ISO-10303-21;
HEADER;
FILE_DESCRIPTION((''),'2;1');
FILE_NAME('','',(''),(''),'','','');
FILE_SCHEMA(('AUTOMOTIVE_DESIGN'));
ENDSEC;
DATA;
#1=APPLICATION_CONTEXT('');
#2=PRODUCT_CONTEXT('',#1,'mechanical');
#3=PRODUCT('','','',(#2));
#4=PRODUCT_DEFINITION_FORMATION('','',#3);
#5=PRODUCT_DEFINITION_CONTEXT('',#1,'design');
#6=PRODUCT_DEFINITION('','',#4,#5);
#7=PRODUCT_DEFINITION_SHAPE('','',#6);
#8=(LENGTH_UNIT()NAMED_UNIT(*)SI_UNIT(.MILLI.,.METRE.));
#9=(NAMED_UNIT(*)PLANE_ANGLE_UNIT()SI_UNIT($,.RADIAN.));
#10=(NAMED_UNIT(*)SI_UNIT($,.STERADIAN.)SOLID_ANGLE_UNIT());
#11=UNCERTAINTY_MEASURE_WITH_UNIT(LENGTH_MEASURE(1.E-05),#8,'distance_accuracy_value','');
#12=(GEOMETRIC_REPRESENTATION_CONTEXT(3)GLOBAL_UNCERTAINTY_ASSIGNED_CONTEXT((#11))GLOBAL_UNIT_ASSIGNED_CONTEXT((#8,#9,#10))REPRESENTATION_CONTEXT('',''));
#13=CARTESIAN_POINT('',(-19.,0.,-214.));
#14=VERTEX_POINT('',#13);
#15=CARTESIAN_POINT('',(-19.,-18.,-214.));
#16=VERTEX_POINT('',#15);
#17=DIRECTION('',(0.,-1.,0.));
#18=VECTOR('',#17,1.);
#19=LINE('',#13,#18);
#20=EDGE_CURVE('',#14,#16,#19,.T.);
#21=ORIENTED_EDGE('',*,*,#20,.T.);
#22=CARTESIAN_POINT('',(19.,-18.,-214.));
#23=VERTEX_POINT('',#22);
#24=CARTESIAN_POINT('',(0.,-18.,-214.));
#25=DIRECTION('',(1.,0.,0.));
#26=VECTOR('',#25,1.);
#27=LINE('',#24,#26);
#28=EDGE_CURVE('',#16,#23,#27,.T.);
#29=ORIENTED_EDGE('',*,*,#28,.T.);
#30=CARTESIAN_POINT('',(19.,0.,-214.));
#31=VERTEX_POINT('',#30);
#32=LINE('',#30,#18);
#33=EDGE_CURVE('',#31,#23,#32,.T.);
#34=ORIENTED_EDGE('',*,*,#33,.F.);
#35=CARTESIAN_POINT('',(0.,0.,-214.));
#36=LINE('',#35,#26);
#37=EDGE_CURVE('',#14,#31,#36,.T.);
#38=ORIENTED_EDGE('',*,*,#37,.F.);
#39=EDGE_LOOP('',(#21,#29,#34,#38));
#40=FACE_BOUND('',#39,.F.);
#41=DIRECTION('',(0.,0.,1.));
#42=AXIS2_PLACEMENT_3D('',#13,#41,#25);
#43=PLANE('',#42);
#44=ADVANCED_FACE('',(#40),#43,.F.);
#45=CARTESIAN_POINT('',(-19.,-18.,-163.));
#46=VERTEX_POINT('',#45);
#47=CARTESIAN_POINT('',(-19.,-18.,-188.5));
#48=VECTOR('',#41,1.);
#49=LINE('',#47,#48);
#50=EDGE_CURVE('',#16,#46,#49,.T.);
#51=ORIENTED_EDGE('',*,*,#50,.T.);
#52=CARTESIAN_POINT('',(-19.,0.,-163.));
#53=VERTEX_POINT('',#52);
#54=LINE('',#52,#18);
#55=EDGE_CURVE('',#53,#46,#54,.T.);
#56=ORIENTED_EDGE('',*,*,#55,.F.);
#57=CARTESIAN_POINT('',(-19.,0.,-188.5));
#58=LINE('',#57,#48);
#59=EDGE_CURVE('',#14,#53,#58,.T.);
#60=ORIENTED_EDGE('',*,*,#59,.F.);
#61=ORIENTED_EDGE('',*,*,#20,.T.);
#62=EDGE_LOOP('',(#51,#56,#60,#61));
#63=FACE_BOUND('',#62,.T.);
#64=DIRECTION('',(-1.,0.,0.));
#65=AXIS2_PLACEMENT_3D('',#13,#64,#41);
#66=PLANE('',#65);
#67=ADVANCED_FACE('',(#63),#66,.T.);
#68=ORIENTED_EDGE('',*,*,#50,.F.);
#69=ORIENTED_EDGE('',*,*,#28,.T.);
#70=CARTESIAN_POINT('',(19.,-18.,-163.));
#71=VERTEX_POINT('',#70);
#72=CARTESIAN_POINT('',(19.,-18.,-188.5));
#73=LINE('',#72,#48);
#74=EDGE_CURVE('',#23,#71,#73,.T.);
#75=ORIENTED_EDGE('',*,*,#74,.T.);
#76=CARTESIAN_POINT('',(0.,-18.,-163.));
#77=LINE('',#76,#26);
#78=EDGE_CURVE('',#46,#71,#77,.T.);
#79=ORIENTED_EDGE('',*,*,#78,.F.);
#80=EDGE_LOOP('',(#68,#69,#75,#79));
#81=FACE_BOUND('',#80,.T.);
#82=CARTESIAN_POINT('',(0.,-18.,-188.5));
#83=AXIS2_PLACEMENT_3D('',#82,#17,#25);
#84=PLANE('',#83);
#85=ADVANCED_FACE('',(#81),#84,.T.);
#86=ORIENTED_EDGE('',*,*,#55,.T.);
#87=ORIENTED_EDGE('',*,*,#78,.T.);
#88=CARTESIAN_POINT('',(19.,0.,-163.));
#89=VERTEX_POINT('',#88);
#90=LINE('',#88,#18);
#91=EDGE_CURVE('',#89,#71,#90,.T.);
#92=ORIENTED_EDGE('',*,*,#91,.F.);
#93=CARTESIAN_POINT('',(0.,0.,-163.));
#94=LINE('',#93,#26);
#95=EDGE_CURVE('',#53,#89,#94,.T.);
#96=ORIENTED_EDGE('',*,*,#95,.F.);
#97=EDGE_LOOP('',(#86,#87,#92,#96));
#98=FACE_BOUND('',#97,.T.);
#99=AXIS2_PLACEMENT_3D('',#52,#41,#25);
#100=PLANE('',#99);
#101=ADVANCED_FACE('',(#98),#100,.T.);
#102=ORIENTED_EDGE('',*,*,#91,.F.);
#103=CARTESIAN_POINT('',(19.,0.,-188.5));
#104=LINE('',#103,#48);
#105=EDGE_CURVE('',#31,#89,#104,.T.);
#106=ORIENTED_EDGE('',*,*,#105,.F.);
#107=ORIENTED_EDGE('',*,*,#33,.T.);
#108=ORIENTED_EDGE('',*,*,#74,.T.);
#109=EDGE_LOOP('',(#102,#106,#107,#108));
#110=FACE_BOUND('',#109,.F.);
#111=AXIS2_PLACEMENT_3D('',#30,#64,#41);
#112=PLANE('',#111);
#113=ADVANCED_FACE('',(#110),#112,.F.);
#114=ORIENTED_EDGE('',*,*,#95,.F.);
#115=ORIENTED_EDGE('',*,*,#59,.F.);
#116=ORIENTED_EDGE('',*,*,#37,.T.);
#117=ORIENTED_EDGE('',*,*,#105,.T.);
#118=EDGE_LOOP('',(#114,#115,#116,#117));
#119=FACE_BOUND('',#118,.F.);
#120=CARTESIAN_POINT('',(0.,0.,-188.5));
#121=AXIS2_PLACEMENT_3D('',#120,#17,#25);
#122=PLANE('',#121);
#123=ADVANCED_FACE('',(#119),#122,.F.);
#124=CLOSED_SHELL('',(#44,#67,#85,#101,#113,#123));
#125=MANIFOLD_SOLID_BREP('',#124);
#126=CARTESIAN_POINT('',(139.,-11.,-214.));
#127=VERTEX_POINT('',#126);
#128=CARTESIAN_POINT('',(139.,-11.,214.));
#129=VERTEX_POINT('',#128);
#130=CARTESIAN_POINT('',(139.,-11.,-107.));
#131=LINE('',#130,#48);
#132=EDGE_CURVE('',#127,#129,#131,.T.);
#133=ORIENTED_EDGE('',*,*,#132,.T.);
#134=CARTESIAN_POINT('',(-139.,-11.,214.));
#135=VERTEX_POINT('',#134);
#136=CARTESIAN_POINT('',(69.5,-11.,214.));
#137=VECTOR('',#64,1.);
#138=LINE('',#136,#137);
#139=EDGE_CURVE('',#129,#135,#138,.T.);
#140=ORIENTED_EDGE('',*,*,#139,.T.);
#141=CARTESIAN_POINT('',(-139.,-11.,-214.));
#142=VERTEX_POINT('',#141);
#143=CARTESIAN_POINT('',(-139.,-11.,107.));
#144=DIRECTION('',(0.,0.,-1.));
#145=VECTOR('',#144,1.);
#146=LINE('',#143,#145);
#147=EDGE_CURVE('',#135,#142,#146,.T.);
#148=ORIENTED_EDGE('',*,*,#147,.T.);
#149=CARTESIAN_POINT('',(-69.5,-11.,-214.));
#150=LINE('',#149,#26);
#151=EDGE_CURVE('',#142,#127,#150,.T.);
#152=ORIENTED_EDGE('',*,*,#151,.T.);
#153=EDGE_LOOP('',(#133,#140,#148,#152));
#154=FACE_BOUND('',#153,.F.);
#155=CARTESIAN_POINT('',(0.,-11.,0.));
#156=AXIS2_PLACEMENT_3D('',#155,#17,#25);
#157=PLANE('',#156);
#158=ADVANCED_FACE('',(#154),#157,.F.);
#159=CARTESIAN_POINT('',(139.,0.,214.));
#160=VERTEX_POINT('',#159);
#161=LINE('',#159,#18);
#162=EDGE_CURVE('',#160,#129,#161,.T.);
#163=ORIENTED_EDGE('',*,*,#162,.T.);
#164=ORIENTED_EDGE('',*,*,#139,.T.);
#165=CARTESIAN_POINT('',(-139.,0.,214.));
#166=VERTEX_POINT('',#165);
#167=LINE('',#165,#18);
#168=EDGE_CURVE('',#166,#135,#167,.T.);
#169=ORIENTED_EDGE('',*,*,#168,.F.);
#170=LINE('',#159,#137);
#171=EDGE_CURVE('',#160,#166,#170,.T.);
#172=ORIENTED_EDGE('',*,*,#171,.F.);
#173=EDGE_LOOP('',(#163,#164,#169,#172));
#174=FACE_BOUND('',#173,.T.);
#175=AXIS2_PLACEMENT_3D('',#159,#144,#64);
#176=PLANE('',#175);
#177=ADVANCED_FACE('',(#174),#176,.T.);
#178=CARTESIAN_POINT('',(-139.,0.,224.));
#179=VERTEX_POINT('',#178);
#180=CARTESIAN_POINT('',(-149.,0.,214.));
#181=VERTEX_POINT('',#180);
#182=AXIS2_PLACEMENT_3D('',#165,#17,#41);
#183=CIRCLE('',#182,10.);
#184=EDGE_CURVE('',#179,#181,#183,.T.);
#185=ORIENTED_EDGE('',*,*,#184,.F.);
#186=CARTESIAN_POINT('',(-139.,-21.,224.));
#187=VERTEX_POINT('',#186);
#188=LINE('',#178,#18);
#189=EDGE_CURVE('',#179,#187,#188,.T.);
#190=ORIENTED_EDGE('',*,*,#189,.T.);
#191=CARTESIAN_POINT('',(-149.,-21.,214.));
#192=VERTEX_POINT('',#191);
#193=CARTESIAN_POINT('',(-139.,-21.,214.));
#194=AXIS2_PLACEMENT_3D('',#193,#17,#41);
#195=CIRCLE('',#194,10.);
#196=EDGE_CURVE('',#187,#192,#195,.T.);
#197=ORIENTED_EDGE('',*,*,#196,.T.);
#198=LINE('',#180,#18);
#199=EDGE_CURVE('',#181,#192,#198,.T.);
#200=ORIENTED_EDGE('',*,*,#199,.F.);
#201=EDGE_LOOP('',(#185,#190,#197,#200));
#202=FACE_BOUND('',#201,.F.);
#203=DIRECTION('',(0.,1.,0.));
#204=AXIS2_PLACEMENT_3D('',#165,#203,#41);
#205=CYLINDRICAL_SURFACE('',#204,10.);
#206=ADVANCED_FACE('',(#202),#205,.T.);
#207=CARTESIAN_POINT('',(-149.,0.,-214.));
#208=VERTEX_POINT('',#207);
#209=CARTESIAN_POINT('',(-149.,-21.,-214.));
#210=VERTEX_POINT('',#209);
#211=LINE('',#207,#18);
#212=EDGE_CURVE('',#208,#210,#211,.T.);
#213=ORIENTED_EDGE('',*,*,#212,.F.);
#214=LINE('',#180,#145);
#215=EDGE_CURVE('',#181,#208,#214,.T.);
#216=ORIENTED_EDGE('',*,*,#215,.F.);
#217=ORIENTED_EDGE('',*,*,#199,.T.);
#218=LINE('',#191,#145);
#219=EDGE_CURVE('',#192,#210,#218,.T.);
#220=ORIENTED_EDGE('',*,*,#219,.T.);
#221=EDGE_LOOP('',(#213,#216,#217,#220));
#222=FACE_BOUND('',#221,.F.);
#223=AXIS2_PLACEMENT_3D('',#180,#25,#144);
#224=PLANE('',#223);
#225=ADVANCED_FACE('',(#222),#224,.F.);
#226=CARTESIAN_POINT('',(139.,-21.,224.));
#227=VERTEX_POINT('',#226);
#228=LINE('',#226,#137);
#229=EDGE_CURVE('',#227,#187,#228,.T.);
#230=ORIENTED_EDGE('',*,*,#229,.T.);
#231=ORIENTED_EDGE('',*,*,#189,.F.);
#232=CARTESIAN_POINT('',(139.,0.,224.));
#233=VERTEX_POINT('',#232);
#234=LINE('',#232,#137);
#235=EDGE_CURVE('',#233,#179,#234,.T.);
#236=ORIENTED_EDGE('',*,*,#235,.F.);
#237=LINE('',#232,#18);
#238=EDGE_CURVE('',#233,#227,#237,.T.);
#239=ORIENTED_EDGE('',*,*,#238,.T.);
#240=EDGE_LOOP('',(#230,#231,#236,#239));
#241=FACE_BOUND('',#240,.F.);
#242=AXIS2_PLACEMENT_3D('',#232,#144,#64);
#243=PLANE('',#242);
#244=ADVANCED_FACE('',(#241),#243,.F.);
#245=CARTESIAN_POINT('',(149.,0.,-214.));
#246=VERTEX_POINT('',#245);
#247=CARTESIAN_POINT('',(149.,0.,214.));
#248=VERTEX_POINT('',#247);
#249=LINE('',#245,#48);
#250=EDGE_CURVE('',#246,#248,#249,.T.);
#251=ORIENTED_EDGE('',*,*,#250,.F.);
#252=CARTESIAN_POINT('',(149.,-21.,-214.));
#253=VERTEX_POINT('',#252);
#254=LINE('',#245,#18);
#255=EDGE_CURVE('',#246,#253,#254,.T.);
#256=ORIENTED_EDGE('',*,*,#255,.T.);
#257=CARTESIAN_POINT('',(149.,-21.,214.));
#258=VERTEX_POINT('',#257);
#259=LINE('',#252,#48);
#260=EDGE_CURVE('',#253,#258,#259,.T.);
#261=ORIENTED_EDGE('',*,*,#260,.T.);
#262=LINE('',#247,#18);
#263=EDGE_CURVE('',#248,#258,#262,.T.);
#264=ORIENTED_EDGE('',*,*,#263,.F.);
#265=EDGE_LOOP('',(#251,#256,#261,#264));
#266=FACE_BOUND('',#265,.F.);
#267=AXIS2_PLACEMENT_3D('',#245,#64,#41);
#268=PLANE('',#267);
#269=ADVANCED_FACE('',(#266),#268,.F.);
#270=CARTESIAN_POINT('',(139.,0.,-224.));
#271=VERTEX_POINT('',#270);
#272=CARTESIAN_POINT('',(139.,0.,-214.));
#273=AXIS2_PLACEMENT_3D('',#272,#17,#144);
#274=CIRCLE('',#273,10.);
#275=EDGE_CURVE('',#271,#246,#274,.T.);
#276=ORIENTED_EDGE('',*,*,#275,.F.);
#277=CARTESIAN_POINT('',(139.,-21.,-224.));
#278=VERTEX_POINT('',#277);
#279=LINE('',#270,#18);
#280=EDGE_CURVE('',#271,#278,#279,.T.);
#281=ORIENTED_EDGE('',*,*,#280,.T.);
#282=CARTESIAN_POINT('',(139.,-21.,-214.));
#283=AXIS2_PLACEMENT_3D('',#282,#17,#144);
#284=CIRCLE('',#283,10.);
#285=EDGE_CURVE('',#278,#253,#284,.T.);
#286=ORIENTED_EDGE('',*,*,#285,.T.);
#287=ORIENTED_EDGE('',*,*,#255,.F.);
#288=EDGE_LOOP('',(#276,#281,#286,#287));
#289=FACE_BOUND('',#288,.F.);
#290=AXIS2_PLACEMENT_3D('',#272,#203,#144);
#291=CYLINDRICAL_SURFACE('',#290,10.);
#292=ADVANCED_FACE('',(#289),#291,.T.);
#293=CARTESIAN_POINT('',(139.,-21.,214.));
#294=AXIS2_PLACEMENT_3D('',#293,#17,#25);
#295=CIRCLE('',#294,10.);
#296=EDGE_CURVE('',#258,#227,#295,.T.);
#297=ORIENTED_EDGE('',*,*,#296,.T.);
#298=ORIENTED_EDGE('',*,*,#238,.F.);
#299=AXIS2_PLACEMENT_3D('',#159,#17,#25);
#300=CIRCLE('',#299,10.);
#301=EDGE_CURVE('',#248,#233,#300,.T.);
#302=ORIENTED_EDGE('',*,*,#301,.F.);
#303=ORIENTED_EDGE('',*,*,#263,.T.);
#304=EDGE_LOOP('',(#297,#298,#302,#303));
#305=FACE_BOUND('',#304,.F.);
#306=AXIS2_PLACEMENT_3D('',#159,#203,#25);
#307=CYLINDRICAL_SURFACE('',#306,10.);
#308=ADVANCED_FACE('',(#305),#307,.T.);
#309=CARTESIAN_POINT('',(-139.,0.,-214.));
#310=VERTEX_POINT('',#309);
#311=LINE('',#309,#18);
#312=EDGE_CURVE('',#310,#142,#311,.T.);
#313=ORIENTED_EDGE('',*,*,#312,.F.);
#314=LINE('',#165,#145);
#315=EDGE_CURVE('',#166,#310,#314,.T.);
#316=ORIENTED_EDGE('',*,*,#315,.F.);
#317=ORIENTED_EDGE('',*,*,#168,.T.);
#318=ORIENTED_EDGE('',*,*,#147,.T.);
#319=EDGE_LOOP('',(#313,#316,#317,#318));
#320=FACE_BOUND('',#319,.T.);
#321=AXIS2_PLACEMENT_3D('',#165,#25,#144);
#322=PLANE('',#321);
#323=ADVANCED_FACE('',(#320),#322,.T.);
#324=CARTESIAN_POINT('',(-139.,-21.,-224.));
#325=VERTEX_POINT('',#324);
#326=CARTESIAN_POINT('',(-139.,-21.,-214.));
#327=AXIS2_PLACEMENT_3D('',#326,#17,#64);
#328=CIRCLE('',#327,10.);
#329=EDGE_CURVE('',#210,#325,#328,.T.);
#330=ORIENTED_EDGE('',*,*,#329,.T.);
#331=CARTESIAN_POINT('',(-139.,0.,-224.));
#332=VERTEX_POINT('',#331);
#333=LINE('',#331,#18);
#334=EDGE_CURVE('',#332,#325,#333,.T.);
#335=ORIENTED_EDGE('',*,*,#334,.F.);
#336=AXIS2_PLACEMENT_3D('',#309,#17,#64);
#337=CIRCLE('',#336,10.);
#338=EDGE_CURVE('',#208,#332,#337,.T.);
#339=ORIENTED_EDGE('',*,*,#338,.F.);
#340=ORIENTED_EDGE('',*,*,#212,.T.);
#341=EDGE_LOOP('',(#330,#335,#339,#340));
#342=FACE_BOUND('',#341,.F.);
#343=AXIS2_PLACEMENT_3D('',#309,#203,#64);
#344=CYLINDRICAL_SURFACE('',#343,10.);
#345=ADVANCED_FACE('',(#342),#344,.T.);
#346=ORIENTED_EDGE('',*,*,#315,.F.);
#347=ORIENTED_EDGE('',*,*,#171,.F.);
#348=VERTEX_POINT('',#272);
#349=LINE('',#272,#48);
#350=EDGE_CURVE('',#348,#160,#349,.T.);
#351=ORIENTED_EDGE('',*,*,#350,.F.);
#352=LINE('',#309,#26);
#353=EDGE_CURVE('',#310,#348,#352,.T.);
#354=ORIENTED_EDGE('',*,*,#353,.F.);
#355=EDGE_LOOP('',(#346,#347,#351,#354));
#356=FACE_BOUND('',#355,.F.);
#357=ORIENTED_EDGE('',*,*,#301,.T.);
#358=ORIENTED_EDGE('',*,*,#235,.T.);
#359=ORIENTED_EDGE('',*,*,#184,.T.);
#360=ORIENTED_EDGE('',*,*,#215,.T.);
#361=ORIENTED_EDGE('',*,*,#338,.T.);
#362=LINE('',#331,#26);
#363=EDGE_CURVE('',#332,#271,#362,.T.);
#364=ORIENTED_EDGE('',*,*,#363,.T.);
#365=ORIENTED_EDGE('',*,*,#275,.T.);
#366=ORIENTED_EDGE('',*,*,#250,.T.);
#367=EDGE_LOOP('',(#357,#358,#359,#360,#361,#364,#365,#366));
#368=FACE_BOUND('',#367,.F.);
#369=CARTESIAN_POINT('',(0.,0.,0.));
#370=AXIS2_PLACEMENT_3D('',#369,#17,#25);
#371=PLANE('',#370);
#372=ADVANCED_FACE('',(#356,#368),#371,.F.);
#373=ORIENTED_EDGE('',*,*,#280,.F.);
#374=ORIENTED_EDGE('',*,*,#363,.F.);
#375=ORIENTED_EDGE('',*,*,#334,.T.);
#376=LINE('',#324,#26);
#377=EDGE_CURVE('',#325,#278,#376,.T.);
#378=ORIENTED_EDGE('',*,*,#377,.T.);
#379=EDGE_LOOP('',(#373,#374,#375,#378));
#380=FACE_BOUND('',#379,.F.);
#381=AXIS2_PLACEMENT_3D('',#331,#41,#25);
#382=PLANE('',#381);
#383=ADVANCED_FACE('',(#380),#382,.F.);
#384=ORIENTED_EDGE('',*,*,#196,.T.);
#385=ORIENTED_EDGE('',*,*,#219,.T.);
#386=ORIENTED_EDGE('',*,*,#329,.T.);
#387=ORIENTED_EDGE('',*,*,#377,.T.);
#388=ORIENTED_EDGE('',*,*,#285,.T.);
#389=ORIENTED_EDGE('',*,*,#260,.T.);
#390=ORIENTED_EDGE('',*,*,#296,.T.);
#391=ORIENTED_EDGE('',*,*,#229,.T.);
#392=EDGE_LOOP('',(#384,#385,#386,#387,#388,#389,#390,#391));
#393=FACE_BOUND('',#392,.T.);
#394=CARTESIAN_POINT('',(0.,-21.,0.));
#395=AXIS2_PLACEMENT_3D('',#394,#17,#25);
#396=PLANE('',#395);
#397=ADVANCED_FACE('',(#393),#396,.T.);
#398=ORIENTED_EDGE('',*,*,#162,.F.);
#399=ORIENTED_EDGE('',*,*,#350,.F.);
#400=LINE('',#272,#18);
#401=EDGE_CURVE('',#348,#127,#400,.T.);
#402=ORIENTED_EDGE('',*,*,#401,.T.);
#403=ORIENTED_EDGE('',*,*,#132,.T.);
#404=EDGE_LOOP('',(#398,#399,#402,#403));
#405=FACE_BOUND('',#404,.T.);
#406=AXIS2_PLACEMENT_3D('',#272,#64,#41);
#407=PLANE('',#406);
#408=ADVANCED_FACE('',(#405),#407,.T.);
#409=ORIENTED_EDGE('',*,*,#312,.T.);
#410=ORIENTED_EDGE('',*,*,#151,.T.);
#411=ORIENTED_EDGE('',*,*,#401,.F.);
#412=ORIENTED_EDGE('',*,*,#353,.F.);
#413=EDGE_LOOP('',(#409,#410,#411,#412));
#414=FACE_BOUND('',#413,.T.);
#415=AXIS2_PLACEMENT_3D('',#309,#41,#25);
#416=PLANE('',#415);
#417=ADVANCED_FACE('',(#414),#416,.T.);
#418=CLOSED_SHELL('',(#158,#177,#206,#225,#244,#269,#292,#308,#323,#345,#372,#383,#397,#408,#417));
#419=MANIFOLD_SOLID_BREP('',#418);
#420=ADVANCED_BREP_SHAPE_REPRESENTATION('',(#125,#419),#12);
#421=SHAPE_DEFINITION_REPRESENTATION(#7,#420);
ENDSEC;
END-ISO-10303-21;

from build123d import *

# Parameters (mm, degrees)
F0_W     = 38
F0_H     = 51
F1_DEPTH = 21
F2_DEPTH = 18
F3_T     = 10


# Not quite as in the source:
# - a shell that OpenCascade refuses in one call is made with other operations: the cavity is built on its own and cut out


with BuildPart() as f1:
    # F0 (on Front) → F1 (new body)
    with BuildSketch(Plane.XZ):
        with BuildLine():
            Line((139, 224), (-139, 224))
            ThreePointArc((-139, 224), (-146.0710678119, 221.0710678119), (-149, 214))
            Line((-149, 214), (-149, -214))
            ThreePointArc((-149, -214), (-146.0710678119, -221.0710678119), (-139, -224))
            Line((-139, -224), (139, -224))
            ThreePointArc((139, -224), (146.0710678119, -221.0710678119), (149, -214))
            Line((149, -214), (149, 214))
            ThreePointArc((149, 214), (146.0710678119, 221.0710678119), (139, 224))
        make_face()
        with Locations((0, -188.5)):
            Rectangle(F0_W, F0_H, mode=Mode.SUBTRACT)
        with Locations((0, -188.5)):
            Rectangle(F0_W, F0_H)
    extrude(amount=F1_DEPTH)

    # F3: shell of thickness 10, made by hand


with BuildPart() as f2:
    # F0 (on Front) → F2 (new body)
    with BuildSketch(Plane.XZ):
        with Locations((0, -188.5)):
            Rectangle(F0_W, F0_H)
    extrude(amount=F2_DEPTH)


with BuildPart() as f3_core1:
    # F3_t2: copy of F1
    add(f1.part)

    # the walls: a layer under each face that stays
    f3_faces = [f3_core1.faces().sort_by_distance(p)[0] for p in [
        (0, -10.5, 224),
        (-149, -10.5, 0),
        (0, -10.5, -224),
        (149, -10.5, 0),
        (0, -21, 0),
    ]]
    thicken(f3_faces, amount=-F3_T, mode=Mode.SUBTRACT)


with BuildPart() as f1_1:
    add(f1.part)

    # what is left inside the walls is the cavity
    f3_cavity = [f3_core1.part.solids().sort_by_distance(p)[0] for p in [
        (0, -0.1, -71.333333),
    ]]
    add(f3_cavity, mode=Mode.SUBTRACT)


solid = Compound([f2.part, f1_1.part])
